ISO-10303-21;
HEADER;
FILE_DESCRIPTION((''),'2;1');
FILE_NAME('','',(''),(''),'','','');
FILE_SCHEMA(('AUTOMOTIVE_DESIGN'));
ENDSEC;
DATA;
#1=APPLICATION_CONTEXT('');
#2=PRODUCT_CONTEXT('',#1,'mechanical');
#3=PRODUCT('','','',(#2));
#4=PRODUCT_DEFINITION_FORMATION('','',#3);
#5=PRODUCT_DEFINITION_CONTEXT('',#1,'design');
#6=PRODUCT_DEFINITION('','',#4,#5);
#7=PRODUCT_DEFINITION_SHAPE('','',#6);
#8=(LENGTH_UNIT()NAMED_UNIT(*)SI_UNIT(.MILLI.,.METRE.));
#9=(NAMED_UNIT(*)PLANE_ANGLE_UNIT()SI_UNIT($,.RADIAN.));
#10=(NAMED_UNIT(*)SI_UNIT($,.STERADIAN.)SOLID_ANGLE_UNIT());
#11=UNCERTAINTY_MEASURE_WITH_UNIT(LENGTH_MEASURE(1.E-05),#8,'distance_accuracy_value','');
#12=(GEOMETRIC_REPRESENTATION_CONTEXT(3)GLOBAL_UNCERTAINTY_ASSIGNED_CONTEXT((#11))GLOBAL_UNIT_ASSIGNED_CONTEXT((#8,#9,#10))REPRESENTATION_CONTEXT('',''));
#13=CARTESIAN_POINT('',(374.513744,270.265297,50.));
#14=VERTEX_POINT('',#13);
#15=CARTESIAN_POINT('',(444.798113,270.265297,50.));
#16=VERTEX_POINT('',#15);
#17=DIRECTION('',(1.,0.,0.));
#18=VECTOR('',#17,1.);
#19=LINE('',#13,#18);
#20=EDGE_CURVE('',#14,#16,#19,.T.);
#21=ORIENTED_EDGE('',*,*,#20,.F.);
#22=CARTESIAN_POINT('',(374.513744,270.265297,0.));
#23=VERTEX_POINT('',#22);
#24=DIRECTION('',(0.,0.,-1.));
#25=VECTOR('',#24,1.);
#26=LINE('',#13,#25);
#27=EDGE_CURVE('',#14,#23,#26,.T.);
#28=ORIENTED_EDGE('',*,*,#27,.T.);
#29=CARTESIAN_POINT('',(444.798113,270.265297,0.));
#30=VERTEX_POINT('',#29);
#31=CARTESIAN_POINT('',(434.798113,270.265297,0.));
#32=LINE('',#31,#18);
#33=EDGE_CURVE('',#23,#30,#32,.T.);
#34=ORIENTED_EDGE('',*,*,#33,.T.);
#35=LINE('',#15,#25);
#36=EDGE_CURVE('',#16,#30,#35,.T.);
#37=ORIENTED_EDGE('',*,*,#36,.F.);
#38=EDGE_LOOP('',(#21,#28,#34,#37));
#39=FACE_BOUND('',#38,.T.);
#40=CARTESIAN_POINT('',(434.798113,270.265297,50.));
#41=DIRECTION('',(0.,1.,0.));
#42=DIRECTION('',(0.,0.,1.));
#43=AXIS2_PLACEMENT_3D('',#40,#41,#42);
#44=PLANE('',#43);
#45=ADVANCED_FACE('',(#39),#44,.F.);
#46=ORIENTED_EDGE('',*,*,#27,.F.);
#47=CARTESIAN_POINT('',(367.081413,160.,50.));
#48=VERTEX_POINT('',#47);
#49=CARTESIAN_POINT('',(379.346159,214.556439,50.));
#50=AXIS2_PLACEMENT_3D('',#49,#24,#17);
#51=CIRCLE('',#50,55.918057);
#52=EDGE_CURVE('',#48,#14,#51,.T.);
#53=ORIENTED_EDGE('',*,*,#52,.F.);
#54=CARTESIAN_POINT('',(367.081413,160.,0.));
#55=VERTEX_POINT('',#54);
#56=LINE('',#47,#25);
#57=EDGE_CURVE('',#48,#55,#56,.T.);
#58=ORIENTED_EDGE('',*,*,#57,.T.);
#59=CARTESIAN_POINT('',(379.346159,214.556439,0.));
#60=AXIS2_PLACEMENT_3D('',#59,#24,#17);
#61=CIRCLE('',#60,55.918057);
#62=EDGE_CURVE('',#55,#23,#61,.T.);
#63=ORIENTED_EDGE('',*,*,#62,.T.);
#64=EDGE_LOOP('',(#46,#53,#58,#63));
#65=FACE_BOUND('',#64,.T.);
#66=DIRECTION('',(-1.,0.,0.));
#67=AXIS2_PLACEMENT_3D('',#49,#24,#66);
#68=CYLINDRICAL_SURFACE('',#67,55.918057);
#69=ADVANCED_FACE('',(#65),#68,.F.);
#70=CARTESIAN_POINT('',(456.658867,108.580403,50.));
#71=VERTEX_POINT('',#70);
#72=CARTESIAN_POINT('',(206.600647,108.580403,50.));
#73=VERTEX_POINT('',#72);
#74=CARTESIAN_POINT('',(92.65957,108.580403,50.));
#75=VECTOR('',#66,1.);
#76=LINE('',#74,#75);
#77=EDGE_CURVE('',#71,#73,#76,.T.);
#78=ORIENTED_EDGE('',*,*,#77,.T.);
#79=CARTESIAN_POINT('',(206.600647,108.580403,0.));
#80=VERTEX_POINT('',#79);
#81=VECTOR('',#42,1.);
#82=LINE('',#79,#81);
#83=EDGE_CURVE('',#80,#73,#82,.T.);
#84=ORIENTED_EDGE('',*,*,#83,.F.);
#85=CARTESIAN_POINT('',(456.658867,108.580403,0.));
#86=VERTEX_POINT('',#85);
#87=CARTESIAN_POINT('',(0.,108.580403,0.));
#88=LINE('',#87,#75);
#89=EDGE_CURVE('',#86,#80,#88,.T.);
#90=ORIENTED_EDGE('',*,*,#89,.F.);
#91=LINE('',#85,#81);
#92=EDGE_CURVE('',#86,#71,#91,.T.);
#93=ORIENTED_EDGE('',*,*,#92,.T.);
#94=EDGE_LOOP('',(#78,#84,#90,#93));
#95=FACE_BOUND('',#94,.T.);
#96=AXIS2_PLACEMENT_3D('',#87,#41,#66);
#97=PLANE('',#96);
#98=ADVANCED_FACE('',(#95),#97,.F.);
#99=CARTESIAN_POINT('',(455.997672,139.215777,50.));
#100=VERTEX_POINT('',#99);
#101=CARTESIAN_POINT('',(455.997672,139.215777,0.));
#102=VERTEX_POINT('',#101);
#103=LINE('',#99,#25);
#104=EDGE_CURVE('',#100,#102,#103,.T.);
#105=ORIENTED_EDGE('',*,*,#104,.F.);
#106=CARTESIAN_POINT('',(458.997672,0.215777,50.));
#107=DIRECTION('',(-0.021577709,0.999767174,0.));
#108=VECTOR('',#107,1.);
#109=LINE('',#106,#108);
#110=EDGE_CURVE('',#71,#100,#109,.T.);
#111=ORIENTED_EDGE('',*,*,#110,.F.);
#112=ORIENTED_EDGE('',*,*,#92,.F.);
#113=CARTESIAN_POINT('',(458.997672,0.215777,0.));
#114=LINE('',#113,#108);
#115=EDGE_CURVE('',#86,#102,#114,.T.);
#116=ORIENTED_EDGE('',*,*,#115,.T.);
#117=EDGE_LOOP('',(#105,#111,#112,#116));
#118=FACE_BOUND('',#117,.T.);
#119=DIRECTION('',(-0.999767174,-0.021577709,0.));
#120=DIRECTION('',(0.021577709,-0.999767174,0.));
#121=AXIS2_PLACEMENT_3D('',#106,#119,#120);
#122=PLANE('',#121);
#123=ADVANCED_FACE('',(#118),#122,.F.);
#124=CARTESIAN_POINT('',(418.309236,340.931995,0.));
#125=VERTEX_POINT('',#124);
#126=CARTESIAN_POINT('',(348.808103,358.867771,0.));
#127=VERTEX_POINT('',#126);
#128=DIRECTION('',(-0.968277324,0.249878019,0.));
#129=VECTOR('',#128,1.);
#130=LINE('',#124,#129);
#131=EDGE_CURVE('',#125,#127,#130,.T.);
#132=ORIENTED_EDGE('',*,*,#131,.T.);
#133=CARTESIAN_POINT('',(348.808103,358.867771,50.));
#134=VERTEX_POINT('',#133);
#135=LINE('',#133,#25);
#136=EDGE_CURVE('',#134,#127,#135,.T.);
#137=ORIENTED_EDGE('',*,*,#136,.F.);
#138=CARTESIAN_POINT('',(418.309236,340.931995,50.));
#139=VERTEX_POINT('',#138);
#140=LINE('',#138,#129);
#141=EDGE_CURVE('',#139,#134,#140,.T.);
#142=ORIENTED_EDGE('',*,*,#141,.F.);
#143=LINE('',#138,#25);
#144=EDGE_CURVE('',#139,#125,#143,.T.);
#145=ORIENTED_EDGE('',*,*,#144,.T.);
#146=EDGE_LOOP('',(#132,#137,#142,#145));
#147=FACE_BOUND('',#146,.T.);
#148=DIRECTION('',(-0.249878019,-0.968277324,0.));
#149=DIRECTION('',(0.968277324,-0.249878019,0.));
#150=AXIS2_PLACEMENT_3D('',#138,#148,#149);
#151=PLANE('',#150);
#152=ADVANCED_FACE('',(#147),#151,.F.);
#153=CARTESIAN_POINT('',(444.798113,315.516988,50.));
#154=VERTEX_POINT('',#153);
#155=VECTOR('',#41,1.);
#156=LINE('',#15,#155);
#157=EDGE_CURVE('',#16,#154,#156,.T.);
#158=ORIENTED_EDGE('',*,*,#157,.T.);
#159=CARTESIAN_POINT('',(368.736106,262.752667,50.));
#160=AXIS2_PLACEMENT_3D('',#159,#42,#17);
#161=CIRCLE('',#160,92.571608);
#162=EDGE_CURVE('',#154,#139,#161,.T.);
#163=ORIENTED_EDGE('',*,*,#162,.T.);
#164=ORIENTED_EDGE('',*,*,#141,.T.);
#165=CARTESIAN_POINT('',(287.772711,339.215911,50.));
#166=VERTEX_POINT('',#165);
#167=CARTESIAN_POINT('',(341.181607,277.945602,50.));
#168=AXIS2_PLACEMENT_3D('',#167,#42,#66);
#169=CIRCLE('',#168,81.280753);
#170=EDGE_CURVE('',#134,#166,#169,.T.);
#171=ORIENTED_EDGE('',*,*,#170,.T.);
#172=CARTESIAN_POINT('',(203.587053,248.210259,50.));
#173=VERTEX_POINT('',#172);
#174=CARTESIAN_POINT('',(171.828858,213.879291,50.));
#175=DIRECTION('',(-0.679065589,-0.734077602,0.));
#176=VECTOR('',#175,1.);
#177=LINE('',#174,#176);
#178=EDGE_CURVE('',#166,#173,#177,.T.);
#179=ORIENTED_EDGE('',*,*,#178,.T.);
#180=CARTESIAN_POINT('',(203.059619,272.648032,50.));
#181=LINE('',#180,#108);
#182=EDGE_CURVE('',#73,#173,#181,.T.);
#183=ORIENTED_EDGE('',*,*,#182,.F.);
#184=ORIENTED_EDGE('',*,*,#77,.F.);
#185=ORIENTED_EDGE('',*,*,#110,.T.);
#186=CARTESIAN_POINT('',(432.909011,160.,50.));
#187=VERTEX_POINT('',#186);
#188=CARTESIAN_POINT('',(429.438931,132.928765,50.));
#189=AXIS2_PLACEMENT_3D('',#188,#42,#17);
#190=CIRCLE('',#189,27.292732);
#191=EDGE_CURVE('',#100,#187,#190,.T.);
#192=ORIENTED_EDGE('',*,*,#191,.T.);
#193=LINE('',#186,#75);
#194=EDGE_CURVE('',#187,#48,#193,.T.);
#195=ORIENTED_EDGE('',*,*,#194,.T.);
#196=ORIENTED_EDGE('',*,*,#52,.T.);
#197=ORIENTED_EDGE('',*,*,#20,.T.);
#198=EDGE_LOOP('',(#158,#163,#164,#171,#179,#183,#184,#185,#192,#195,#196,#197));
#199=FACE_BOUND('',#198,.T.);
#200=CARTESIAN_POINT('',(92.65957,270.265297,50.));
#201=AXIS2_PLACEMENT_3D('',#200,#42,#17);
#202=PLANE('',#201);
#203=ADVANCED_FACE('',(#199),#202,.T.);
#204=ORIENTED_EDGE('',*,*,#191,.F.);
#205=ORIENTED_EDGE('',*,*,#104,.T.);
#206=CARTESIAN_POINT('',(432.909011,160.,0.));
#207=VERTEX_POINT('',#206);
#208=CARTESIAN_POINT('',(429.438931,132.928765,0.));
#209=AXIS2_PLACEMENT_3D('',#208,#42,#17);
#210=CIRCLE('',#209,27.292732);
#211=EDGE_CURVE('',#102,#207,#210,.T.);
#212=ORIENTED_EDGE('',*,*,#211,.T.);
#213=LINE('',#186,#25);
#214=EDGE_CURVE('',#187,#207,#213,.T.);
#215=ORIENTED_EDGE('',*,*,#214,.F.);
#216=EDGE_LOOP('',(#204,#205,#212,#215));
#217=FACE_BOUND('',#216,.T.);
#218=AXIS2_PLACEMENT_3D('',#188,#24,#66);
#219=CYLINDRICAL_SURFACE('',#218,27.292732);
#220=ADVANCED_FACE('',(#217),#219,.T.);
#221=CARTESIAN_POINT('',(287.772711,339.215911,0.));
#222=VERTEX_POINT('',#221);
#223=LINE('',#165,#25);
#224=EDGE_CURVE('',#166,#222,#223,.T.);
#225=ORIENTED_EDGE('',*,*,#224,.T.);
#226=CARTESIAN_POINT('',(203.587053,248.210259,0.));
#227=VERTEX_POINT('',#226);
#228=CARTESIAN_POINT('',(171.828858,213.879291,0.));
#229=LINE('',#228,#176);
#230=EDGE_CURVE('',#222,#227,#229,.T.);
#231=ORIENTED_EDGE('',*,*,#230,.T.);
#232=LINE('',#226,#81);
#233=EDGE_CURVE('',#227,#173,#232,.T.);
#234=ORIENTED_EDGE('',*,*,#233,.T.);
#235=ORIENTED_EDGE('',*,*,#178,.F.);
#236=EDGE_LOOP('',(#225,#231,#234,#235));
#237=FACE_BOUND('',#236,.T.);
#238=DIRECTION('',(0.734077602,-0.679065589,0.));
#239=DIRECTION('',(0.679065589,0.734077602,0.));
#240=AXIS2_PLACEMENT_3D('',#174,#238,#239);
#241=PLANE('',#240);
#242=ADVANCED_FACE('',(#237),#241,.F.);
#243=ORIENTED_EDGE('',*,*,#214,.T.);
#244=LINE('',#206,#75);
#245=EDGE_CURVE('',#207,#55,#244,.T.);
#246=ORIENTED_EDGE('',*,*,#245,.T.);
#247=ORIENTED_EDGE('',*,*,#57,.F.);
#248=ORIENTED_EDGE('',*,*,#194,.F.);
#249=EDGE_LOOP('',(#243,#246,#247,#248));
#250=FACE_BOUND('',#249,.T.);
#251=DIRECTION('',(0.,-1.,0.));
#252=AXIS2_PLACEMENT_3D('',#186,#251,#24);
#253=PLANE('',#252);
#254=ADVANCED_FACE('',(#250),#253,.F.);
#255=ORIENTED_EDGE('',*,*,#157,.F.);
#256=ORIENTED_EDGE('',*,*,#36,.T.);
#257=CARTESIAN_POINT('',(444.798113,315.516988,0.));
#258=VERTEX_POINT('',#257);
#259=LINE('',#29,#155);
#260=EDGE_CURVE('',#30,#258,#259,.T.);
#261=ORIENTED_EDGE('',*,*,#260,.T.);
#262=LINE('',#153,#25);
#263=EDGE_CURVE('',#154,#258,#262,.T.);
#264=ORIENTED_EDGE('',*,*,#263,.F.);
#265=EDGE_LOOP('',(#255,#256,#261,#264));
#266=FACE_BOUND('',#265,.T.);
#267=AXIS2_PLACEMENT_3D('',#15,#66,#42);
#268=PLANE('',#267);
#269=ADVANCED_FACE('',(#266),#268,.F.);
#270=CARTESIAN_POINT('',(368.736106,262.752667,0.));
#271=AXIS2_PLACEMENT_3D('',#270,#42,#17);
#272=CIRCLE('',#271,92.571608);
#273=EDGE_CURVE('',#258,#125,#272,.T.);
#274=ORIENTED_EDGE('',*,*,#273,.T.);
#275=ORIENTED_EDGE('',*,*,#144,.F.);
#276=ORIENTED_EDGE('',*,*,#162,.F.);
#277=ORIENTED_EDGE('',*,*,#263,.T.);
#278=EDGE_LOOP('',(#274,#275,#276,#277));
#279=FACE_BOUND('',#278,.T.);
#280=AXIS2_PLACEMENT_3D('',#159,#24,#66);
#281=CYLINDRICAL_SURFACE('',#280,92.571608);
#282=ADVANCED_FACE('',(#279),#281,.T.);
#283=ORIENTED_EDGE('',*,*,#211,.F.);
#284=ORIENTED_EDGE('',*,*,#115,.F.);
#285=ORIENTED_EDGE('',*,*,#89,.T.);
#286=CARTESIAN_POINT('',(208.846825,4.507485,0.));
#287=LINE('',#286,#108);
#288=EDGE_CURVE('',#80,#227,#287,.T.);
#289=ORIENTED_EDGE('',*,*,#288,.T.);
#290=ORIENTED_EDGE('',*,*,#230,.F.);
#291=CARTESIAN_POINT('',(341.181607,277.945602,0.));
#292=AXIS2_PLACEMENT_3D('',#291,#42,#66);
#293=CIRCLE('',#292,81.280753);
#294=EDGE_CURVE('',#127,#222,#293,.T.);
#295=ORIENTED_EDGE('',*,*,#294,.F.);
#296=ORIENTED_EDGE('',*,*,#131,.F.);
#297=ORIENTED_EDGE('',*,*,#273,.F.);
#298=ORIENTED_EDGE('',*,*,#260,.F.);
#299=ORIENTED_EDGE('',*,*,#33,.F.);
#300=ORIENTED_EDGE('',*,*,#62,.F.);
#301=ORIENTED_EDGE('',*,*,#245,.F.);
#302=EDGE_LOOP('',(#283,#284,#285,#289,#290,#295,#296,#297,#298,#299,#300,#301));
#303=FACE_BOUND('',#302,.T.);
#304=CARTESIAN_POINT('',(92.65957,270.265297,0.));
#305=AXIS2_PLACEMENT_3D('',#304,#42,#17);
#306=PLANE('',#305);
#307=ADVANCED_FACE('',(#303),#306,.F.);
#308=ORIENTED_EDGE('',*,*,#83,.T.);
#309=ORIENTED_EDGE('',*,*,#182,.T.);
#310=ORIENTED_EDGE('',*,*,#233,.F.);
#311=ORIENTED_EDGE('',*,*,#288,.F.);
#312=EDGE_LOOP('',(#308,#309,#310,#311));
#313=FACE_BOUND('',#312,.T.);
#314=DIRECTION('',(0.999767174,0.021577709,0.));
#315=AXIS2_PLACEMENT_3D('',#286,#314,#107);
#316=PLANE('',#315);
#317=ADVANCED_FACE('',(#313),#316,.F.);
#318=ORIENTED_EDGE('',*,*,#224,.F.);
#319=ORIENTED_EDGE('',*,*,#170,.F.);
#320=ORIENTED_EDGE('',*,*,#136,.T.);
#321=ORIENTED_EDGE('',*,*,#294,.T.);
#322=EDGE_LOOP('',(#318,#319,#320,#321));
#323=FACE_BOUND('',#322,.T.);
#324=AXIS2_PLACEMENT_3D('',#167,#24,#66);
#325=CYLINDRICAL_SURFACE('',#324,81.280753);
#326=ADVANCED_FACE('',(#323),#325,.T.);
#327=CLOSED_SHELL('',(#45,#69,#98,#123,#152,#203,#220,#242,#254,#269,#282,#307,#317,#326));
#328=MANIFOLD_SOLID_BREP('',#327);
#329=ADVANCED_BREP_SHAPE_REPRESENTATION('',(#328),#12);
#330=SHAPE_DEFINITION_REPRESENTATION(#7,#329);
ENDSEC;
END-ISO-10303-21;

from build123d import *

# Parameters (mm, degrees)
TABAN_FLAN_1_DEPTH         = 50
KES_EKSTR_ZYON1_DEPTH      = 585.997809561
KES_EKSTR_ZYON1_DEPTH_BACK = 585.997809561


# Sheet-metal steps are written as plain solids
with BuildPart() as part:
    # Çizim1 → Taban-Flanş1 (new body)
    with BuildSketch(Plane.XY):
        with BuildLine():
            Line((0, 0), (218.5, 0))
            ThreePointArc((218.5, 0), (276, 50), (333.5, 0))
            Line((333.5, 0), (360, 0))
            Line((360, 0), (449, 0))
            Line((449, 0), (458.997671741, 0.215777088))
            Line((458.997671741, 0.215777088), (455.997671741, 139.215777088))
            ThreePointArc((455.997671741, 139.215777088), (447.698955646, 153.213358252), (432.909011054, 160))
            Line((432.909011054, 160), (367.081412811, 160))
            ThreePointArc((367.081412811, 160), (323.554697394, 218.317011668), (374.513743955, 270.265297284))
            Line((374.513743955, 270.265297284), (434.798113421, 270.265297284))
            Line((434.798113421, 270.265297284), (444.798113421, 270.265297284))
            Line((444.798113421, 270.265297284), (444.798113421, 315.516988045))
            ThreePointArc((444.798113421, 315.516988045), (432.826102146, 329.550683033), (418.309236409, 340.931994828))
            Line((418.309236409, 340.931994828), (348.808103312, 358.867771111))
            ThreePointArc((348.808103312, 358.867771111), (316.270646866, 355.31487857), (287.772711056, 339.215910531))
            Line((287.772711056, 339.215910531), (171.828858079, 213.879290682))
            ThreePointArc((171.828858079, 213.879290682), (144.61514494, 194.164293468), (113.814091907, 180.726941422))
            ThreePointArc((113.814091907, 180.726941422), (82.931673061, 178.777598724), (53.149679292, 187.177395023))
            Line((53.149679292, 187.177395023), (53.149679292, 80.862415296))
            Line((53.149679292, 80.862415296), (0, 0))
        make_face()
    extrude(amount=TABAN_FLAN_1_DEPTH)

    # Çizim2 → Kes-Ekstrüzyon1 (cut, two sides: drawn at the far end of the back side and taken through both)
    with BuildSketch(Plane.XY.offset(50).offset(-KES_EKSTR_ZYON1_DEPTH_BACK)):
        with BuildLine():
            Line((456.658866876, 108.580402505), (206.600646856, 108.580402505))
            Line((206.600646856, 108.580402505), (203.587052823, 248.210259333))
            Line((203.587052823, 248.210259333), (171.828858079, 213.879290682))
            ThreePointArc((171.828858079, 213.879290682), (144.61514494, 194.164293468), (113.814091907, 180.726941422))
            ThreePointArc((113.814091907, 180.726941422), (82.931673061, 178.777598724), (53.149679292, 187.177395023))
            Line((53.149679292, 187.177395023), (53.149679292, 80.862415296))
            Line((53.149679292, 80.862415296), (0, 0))
            Line((0, 0), (218.5, 0))
            ThreePointArc((218.5, 0), (276, 50), (333.5, 0))
            Line((333.5, 0), (449, 0))
            Line((449, 0), (458.997671741, 0.215777088))
            Line((458.997671741, 0.215777088), (456.658866876, 108.580402505))
        make_face()
    extrude(amount=KES_EKSTR_ZYON1_DEPTH + KES_EKSTR_ZYON1_DEPTH_BACK, mode=Mode.SUBTRACT)


solid = part.part
